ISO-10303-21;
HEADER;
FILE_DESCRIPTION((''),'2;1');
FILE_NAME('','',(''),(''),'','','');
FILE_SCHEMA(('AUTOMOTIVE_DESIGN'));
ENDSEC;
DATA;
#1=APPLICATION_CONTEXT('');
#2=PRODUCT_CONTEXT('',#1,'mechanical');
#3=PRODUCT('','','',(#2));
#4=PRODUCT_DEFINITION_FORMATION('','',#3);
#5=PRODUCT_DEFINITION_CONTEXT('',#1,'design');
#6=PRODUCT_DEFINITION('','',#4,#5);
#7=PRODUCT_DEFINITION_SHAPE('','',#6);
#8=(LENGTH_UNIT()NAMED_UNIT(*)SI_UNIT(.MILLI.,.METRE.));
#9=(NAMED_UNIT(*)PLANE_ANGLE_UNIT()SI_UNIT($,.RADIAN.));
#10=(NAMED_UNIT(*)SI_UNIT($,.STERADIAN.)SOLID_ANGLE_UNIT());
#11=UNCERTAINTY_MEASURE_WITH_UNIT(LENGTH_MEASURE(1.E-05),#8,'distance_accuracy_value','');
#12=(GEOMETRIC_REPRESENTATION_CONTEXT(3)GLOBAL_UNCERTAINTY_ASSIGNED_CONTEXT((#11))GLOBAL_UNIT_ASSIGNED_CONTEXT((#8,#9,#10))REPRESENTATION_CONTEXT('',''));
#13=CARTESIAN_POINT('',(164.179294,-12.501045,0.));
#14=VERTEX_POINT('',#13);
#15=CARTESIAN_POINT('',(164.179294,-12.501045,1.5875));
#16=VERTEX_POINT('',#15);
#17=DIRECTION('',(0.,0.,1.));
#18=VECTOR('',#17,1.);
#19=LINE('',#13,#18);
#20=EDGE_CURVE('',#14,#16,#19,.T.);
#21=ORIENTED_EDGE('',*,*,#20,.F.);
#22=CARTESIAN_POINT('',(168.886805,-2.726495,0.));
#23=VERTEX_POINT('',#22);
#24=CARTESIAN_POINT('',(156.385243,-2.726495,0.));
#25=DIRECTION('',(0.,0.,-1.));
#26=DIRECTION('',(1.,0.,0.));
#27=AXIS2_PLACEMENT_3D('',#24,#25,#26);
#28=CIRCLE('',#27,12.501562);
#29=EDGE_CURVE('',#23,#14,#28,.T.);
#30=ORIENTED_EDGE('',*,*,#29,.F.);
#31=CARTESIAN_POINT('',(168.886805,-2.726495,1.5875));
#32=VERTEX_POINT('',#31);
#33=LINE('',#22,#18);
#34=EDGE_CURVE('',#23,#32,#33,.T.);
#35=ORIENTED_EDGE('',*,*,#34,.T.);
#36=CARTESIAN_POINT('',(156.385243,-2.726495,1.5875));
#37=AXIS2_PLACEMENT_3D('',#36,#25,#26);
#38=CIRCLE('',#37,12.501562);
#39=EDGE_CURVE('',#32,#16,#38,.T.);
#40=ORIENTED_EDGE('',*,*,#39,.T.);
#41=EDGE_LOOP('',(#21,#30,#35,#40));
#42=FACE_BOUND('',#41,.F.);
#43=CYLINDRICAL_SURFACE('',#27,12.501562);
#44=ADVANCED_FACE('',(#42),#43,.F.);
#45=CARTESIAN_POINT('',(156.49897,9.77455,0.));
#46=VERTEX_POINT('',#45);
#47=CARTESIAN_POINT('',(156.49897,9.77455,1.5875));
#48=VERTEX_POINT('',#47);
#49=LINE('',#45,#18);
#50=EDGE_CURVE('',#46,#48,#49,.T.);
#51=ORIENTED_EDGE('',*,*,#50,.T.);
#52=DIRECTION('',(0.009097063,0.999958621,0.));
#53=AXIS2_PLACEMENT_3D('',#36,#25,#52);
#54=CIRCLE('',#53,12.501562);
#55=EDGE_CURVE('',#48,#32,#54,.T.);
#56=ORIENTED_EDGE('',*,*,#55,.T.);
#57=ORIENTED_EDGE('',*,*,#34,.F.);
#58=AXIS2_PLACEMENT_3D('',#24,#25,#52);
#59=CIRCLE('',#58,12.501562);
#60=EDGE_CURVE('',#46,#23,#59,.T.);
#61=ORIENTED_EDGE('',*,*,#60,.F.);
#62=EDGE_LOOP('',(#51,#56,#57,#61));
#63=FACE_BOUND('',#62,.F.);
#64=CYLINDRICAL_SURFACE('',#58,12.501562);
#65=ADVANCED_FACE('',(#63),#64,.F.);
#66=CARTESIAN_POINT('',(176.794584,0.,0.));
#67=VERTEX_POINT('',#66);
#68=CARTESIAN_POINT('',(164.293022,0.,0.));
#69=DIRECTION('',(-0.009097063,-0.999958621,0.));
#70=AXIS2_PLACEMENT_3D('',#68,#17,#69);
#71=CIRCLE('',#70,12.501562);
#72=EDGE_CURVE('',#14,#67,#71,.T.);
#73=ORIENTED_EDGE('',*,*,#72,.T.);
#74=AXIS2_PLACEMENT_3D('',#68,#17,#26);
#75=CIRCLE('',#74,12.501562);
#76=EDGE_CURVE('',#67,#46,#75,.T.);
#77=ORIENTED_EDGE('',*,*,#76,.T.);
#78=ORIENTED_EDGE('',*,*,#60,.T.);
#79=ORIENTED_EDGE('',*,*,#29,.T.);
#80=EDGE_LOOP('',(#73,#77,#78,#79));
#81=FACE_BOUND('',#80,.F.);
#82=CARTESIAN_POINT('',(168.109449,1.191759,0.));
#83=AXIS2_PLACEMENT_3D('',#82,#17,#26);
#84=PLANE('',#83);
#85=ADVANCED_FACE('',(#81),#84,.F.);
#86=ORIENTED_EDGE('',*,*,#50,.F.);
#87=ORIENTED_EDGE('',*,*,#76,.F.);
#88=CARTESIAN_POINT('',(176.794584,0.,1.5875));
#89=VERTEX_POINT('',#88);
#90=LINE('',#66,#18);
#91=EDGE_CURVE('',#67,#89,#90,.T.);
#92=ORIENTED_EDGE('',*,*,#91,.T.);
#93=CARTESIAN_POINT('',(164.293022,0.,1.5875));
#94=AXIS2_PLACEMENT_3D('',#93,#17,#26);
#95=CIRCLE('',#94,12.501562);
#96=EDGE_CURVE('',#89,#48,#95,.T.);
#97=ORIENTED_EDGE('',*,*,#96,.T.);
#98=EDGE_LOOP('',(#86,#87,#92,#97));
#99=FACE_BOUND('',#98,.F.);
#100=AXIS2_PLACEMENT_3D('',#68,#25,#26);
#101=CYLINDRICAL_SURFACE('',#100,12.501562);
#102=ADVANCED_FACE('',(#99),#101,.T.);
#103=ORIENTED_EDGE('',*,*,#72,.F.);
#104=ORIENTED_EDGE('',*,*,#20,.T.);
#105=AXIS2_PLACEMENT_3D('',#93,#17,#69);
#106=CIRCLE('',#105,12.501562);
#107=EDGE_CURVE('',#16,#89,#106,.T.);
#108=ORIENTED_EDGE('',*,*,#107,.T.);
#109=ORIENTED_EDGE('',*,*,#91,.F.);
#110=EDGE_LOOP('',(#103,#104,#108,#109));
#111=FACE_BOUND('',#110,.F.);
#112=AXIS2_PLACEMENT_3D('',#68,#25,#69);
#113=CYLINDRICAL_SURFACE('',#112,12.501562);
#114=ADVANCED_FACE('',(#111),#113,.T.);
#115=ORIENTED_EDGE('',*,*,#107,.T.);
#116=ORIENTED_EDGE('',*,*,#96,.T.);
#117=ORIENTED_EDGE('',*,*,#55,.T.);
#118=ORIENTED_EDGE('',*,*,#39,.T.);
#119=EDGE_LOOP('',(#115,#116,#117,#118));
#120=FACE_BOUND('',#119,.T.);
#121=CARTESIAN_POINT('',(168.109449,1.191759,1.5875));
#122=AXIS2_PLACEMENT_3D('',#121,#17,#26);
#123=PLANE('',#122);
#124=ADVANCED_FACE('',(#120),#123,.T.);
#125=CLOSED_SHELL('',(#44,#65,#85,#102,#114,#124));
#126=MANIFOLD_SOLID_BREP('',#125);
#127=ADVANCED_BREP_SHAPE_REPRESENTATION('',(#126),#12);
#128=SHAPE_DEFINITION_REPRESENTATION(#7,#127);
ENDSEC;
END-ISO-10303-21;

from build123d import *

# Parameters (mm, degrees)
F2_DEPTH = 1.5875


# Not quite as in the source:
# - a length typed as a fraction of an inch, garbled in the dataset ("3 / 203.2 mm" for 3/8 in), is restored


with BuildPart() as f2:
    # F1 (on face) → F2 (new body)
    with BuildSketch(Plane.XY):
        with BuildLine():
            ThreePointArc((168.886805439, -2.726495266), (167.6486102586, -8.1510341004), (164.1792944273, -12.5010451962))
            ThreePointArc((164.1792944273, -12.5010451962), (173.0926609381, -8.8800573298), (176.794584425, 0))
            ThreePointArc((176.794584425, 0), (169.7175607594, 11.2633673196), (156.4989704367, 9.7745499302))
            ThreePointArc((156.4989704367, 9.7745499302), (165.2653002688, 6.0731437471), (168.886805439, -2.726495266))
        make_face()
    extrude(amount=F2_DEPTH)


solid = f2.part
